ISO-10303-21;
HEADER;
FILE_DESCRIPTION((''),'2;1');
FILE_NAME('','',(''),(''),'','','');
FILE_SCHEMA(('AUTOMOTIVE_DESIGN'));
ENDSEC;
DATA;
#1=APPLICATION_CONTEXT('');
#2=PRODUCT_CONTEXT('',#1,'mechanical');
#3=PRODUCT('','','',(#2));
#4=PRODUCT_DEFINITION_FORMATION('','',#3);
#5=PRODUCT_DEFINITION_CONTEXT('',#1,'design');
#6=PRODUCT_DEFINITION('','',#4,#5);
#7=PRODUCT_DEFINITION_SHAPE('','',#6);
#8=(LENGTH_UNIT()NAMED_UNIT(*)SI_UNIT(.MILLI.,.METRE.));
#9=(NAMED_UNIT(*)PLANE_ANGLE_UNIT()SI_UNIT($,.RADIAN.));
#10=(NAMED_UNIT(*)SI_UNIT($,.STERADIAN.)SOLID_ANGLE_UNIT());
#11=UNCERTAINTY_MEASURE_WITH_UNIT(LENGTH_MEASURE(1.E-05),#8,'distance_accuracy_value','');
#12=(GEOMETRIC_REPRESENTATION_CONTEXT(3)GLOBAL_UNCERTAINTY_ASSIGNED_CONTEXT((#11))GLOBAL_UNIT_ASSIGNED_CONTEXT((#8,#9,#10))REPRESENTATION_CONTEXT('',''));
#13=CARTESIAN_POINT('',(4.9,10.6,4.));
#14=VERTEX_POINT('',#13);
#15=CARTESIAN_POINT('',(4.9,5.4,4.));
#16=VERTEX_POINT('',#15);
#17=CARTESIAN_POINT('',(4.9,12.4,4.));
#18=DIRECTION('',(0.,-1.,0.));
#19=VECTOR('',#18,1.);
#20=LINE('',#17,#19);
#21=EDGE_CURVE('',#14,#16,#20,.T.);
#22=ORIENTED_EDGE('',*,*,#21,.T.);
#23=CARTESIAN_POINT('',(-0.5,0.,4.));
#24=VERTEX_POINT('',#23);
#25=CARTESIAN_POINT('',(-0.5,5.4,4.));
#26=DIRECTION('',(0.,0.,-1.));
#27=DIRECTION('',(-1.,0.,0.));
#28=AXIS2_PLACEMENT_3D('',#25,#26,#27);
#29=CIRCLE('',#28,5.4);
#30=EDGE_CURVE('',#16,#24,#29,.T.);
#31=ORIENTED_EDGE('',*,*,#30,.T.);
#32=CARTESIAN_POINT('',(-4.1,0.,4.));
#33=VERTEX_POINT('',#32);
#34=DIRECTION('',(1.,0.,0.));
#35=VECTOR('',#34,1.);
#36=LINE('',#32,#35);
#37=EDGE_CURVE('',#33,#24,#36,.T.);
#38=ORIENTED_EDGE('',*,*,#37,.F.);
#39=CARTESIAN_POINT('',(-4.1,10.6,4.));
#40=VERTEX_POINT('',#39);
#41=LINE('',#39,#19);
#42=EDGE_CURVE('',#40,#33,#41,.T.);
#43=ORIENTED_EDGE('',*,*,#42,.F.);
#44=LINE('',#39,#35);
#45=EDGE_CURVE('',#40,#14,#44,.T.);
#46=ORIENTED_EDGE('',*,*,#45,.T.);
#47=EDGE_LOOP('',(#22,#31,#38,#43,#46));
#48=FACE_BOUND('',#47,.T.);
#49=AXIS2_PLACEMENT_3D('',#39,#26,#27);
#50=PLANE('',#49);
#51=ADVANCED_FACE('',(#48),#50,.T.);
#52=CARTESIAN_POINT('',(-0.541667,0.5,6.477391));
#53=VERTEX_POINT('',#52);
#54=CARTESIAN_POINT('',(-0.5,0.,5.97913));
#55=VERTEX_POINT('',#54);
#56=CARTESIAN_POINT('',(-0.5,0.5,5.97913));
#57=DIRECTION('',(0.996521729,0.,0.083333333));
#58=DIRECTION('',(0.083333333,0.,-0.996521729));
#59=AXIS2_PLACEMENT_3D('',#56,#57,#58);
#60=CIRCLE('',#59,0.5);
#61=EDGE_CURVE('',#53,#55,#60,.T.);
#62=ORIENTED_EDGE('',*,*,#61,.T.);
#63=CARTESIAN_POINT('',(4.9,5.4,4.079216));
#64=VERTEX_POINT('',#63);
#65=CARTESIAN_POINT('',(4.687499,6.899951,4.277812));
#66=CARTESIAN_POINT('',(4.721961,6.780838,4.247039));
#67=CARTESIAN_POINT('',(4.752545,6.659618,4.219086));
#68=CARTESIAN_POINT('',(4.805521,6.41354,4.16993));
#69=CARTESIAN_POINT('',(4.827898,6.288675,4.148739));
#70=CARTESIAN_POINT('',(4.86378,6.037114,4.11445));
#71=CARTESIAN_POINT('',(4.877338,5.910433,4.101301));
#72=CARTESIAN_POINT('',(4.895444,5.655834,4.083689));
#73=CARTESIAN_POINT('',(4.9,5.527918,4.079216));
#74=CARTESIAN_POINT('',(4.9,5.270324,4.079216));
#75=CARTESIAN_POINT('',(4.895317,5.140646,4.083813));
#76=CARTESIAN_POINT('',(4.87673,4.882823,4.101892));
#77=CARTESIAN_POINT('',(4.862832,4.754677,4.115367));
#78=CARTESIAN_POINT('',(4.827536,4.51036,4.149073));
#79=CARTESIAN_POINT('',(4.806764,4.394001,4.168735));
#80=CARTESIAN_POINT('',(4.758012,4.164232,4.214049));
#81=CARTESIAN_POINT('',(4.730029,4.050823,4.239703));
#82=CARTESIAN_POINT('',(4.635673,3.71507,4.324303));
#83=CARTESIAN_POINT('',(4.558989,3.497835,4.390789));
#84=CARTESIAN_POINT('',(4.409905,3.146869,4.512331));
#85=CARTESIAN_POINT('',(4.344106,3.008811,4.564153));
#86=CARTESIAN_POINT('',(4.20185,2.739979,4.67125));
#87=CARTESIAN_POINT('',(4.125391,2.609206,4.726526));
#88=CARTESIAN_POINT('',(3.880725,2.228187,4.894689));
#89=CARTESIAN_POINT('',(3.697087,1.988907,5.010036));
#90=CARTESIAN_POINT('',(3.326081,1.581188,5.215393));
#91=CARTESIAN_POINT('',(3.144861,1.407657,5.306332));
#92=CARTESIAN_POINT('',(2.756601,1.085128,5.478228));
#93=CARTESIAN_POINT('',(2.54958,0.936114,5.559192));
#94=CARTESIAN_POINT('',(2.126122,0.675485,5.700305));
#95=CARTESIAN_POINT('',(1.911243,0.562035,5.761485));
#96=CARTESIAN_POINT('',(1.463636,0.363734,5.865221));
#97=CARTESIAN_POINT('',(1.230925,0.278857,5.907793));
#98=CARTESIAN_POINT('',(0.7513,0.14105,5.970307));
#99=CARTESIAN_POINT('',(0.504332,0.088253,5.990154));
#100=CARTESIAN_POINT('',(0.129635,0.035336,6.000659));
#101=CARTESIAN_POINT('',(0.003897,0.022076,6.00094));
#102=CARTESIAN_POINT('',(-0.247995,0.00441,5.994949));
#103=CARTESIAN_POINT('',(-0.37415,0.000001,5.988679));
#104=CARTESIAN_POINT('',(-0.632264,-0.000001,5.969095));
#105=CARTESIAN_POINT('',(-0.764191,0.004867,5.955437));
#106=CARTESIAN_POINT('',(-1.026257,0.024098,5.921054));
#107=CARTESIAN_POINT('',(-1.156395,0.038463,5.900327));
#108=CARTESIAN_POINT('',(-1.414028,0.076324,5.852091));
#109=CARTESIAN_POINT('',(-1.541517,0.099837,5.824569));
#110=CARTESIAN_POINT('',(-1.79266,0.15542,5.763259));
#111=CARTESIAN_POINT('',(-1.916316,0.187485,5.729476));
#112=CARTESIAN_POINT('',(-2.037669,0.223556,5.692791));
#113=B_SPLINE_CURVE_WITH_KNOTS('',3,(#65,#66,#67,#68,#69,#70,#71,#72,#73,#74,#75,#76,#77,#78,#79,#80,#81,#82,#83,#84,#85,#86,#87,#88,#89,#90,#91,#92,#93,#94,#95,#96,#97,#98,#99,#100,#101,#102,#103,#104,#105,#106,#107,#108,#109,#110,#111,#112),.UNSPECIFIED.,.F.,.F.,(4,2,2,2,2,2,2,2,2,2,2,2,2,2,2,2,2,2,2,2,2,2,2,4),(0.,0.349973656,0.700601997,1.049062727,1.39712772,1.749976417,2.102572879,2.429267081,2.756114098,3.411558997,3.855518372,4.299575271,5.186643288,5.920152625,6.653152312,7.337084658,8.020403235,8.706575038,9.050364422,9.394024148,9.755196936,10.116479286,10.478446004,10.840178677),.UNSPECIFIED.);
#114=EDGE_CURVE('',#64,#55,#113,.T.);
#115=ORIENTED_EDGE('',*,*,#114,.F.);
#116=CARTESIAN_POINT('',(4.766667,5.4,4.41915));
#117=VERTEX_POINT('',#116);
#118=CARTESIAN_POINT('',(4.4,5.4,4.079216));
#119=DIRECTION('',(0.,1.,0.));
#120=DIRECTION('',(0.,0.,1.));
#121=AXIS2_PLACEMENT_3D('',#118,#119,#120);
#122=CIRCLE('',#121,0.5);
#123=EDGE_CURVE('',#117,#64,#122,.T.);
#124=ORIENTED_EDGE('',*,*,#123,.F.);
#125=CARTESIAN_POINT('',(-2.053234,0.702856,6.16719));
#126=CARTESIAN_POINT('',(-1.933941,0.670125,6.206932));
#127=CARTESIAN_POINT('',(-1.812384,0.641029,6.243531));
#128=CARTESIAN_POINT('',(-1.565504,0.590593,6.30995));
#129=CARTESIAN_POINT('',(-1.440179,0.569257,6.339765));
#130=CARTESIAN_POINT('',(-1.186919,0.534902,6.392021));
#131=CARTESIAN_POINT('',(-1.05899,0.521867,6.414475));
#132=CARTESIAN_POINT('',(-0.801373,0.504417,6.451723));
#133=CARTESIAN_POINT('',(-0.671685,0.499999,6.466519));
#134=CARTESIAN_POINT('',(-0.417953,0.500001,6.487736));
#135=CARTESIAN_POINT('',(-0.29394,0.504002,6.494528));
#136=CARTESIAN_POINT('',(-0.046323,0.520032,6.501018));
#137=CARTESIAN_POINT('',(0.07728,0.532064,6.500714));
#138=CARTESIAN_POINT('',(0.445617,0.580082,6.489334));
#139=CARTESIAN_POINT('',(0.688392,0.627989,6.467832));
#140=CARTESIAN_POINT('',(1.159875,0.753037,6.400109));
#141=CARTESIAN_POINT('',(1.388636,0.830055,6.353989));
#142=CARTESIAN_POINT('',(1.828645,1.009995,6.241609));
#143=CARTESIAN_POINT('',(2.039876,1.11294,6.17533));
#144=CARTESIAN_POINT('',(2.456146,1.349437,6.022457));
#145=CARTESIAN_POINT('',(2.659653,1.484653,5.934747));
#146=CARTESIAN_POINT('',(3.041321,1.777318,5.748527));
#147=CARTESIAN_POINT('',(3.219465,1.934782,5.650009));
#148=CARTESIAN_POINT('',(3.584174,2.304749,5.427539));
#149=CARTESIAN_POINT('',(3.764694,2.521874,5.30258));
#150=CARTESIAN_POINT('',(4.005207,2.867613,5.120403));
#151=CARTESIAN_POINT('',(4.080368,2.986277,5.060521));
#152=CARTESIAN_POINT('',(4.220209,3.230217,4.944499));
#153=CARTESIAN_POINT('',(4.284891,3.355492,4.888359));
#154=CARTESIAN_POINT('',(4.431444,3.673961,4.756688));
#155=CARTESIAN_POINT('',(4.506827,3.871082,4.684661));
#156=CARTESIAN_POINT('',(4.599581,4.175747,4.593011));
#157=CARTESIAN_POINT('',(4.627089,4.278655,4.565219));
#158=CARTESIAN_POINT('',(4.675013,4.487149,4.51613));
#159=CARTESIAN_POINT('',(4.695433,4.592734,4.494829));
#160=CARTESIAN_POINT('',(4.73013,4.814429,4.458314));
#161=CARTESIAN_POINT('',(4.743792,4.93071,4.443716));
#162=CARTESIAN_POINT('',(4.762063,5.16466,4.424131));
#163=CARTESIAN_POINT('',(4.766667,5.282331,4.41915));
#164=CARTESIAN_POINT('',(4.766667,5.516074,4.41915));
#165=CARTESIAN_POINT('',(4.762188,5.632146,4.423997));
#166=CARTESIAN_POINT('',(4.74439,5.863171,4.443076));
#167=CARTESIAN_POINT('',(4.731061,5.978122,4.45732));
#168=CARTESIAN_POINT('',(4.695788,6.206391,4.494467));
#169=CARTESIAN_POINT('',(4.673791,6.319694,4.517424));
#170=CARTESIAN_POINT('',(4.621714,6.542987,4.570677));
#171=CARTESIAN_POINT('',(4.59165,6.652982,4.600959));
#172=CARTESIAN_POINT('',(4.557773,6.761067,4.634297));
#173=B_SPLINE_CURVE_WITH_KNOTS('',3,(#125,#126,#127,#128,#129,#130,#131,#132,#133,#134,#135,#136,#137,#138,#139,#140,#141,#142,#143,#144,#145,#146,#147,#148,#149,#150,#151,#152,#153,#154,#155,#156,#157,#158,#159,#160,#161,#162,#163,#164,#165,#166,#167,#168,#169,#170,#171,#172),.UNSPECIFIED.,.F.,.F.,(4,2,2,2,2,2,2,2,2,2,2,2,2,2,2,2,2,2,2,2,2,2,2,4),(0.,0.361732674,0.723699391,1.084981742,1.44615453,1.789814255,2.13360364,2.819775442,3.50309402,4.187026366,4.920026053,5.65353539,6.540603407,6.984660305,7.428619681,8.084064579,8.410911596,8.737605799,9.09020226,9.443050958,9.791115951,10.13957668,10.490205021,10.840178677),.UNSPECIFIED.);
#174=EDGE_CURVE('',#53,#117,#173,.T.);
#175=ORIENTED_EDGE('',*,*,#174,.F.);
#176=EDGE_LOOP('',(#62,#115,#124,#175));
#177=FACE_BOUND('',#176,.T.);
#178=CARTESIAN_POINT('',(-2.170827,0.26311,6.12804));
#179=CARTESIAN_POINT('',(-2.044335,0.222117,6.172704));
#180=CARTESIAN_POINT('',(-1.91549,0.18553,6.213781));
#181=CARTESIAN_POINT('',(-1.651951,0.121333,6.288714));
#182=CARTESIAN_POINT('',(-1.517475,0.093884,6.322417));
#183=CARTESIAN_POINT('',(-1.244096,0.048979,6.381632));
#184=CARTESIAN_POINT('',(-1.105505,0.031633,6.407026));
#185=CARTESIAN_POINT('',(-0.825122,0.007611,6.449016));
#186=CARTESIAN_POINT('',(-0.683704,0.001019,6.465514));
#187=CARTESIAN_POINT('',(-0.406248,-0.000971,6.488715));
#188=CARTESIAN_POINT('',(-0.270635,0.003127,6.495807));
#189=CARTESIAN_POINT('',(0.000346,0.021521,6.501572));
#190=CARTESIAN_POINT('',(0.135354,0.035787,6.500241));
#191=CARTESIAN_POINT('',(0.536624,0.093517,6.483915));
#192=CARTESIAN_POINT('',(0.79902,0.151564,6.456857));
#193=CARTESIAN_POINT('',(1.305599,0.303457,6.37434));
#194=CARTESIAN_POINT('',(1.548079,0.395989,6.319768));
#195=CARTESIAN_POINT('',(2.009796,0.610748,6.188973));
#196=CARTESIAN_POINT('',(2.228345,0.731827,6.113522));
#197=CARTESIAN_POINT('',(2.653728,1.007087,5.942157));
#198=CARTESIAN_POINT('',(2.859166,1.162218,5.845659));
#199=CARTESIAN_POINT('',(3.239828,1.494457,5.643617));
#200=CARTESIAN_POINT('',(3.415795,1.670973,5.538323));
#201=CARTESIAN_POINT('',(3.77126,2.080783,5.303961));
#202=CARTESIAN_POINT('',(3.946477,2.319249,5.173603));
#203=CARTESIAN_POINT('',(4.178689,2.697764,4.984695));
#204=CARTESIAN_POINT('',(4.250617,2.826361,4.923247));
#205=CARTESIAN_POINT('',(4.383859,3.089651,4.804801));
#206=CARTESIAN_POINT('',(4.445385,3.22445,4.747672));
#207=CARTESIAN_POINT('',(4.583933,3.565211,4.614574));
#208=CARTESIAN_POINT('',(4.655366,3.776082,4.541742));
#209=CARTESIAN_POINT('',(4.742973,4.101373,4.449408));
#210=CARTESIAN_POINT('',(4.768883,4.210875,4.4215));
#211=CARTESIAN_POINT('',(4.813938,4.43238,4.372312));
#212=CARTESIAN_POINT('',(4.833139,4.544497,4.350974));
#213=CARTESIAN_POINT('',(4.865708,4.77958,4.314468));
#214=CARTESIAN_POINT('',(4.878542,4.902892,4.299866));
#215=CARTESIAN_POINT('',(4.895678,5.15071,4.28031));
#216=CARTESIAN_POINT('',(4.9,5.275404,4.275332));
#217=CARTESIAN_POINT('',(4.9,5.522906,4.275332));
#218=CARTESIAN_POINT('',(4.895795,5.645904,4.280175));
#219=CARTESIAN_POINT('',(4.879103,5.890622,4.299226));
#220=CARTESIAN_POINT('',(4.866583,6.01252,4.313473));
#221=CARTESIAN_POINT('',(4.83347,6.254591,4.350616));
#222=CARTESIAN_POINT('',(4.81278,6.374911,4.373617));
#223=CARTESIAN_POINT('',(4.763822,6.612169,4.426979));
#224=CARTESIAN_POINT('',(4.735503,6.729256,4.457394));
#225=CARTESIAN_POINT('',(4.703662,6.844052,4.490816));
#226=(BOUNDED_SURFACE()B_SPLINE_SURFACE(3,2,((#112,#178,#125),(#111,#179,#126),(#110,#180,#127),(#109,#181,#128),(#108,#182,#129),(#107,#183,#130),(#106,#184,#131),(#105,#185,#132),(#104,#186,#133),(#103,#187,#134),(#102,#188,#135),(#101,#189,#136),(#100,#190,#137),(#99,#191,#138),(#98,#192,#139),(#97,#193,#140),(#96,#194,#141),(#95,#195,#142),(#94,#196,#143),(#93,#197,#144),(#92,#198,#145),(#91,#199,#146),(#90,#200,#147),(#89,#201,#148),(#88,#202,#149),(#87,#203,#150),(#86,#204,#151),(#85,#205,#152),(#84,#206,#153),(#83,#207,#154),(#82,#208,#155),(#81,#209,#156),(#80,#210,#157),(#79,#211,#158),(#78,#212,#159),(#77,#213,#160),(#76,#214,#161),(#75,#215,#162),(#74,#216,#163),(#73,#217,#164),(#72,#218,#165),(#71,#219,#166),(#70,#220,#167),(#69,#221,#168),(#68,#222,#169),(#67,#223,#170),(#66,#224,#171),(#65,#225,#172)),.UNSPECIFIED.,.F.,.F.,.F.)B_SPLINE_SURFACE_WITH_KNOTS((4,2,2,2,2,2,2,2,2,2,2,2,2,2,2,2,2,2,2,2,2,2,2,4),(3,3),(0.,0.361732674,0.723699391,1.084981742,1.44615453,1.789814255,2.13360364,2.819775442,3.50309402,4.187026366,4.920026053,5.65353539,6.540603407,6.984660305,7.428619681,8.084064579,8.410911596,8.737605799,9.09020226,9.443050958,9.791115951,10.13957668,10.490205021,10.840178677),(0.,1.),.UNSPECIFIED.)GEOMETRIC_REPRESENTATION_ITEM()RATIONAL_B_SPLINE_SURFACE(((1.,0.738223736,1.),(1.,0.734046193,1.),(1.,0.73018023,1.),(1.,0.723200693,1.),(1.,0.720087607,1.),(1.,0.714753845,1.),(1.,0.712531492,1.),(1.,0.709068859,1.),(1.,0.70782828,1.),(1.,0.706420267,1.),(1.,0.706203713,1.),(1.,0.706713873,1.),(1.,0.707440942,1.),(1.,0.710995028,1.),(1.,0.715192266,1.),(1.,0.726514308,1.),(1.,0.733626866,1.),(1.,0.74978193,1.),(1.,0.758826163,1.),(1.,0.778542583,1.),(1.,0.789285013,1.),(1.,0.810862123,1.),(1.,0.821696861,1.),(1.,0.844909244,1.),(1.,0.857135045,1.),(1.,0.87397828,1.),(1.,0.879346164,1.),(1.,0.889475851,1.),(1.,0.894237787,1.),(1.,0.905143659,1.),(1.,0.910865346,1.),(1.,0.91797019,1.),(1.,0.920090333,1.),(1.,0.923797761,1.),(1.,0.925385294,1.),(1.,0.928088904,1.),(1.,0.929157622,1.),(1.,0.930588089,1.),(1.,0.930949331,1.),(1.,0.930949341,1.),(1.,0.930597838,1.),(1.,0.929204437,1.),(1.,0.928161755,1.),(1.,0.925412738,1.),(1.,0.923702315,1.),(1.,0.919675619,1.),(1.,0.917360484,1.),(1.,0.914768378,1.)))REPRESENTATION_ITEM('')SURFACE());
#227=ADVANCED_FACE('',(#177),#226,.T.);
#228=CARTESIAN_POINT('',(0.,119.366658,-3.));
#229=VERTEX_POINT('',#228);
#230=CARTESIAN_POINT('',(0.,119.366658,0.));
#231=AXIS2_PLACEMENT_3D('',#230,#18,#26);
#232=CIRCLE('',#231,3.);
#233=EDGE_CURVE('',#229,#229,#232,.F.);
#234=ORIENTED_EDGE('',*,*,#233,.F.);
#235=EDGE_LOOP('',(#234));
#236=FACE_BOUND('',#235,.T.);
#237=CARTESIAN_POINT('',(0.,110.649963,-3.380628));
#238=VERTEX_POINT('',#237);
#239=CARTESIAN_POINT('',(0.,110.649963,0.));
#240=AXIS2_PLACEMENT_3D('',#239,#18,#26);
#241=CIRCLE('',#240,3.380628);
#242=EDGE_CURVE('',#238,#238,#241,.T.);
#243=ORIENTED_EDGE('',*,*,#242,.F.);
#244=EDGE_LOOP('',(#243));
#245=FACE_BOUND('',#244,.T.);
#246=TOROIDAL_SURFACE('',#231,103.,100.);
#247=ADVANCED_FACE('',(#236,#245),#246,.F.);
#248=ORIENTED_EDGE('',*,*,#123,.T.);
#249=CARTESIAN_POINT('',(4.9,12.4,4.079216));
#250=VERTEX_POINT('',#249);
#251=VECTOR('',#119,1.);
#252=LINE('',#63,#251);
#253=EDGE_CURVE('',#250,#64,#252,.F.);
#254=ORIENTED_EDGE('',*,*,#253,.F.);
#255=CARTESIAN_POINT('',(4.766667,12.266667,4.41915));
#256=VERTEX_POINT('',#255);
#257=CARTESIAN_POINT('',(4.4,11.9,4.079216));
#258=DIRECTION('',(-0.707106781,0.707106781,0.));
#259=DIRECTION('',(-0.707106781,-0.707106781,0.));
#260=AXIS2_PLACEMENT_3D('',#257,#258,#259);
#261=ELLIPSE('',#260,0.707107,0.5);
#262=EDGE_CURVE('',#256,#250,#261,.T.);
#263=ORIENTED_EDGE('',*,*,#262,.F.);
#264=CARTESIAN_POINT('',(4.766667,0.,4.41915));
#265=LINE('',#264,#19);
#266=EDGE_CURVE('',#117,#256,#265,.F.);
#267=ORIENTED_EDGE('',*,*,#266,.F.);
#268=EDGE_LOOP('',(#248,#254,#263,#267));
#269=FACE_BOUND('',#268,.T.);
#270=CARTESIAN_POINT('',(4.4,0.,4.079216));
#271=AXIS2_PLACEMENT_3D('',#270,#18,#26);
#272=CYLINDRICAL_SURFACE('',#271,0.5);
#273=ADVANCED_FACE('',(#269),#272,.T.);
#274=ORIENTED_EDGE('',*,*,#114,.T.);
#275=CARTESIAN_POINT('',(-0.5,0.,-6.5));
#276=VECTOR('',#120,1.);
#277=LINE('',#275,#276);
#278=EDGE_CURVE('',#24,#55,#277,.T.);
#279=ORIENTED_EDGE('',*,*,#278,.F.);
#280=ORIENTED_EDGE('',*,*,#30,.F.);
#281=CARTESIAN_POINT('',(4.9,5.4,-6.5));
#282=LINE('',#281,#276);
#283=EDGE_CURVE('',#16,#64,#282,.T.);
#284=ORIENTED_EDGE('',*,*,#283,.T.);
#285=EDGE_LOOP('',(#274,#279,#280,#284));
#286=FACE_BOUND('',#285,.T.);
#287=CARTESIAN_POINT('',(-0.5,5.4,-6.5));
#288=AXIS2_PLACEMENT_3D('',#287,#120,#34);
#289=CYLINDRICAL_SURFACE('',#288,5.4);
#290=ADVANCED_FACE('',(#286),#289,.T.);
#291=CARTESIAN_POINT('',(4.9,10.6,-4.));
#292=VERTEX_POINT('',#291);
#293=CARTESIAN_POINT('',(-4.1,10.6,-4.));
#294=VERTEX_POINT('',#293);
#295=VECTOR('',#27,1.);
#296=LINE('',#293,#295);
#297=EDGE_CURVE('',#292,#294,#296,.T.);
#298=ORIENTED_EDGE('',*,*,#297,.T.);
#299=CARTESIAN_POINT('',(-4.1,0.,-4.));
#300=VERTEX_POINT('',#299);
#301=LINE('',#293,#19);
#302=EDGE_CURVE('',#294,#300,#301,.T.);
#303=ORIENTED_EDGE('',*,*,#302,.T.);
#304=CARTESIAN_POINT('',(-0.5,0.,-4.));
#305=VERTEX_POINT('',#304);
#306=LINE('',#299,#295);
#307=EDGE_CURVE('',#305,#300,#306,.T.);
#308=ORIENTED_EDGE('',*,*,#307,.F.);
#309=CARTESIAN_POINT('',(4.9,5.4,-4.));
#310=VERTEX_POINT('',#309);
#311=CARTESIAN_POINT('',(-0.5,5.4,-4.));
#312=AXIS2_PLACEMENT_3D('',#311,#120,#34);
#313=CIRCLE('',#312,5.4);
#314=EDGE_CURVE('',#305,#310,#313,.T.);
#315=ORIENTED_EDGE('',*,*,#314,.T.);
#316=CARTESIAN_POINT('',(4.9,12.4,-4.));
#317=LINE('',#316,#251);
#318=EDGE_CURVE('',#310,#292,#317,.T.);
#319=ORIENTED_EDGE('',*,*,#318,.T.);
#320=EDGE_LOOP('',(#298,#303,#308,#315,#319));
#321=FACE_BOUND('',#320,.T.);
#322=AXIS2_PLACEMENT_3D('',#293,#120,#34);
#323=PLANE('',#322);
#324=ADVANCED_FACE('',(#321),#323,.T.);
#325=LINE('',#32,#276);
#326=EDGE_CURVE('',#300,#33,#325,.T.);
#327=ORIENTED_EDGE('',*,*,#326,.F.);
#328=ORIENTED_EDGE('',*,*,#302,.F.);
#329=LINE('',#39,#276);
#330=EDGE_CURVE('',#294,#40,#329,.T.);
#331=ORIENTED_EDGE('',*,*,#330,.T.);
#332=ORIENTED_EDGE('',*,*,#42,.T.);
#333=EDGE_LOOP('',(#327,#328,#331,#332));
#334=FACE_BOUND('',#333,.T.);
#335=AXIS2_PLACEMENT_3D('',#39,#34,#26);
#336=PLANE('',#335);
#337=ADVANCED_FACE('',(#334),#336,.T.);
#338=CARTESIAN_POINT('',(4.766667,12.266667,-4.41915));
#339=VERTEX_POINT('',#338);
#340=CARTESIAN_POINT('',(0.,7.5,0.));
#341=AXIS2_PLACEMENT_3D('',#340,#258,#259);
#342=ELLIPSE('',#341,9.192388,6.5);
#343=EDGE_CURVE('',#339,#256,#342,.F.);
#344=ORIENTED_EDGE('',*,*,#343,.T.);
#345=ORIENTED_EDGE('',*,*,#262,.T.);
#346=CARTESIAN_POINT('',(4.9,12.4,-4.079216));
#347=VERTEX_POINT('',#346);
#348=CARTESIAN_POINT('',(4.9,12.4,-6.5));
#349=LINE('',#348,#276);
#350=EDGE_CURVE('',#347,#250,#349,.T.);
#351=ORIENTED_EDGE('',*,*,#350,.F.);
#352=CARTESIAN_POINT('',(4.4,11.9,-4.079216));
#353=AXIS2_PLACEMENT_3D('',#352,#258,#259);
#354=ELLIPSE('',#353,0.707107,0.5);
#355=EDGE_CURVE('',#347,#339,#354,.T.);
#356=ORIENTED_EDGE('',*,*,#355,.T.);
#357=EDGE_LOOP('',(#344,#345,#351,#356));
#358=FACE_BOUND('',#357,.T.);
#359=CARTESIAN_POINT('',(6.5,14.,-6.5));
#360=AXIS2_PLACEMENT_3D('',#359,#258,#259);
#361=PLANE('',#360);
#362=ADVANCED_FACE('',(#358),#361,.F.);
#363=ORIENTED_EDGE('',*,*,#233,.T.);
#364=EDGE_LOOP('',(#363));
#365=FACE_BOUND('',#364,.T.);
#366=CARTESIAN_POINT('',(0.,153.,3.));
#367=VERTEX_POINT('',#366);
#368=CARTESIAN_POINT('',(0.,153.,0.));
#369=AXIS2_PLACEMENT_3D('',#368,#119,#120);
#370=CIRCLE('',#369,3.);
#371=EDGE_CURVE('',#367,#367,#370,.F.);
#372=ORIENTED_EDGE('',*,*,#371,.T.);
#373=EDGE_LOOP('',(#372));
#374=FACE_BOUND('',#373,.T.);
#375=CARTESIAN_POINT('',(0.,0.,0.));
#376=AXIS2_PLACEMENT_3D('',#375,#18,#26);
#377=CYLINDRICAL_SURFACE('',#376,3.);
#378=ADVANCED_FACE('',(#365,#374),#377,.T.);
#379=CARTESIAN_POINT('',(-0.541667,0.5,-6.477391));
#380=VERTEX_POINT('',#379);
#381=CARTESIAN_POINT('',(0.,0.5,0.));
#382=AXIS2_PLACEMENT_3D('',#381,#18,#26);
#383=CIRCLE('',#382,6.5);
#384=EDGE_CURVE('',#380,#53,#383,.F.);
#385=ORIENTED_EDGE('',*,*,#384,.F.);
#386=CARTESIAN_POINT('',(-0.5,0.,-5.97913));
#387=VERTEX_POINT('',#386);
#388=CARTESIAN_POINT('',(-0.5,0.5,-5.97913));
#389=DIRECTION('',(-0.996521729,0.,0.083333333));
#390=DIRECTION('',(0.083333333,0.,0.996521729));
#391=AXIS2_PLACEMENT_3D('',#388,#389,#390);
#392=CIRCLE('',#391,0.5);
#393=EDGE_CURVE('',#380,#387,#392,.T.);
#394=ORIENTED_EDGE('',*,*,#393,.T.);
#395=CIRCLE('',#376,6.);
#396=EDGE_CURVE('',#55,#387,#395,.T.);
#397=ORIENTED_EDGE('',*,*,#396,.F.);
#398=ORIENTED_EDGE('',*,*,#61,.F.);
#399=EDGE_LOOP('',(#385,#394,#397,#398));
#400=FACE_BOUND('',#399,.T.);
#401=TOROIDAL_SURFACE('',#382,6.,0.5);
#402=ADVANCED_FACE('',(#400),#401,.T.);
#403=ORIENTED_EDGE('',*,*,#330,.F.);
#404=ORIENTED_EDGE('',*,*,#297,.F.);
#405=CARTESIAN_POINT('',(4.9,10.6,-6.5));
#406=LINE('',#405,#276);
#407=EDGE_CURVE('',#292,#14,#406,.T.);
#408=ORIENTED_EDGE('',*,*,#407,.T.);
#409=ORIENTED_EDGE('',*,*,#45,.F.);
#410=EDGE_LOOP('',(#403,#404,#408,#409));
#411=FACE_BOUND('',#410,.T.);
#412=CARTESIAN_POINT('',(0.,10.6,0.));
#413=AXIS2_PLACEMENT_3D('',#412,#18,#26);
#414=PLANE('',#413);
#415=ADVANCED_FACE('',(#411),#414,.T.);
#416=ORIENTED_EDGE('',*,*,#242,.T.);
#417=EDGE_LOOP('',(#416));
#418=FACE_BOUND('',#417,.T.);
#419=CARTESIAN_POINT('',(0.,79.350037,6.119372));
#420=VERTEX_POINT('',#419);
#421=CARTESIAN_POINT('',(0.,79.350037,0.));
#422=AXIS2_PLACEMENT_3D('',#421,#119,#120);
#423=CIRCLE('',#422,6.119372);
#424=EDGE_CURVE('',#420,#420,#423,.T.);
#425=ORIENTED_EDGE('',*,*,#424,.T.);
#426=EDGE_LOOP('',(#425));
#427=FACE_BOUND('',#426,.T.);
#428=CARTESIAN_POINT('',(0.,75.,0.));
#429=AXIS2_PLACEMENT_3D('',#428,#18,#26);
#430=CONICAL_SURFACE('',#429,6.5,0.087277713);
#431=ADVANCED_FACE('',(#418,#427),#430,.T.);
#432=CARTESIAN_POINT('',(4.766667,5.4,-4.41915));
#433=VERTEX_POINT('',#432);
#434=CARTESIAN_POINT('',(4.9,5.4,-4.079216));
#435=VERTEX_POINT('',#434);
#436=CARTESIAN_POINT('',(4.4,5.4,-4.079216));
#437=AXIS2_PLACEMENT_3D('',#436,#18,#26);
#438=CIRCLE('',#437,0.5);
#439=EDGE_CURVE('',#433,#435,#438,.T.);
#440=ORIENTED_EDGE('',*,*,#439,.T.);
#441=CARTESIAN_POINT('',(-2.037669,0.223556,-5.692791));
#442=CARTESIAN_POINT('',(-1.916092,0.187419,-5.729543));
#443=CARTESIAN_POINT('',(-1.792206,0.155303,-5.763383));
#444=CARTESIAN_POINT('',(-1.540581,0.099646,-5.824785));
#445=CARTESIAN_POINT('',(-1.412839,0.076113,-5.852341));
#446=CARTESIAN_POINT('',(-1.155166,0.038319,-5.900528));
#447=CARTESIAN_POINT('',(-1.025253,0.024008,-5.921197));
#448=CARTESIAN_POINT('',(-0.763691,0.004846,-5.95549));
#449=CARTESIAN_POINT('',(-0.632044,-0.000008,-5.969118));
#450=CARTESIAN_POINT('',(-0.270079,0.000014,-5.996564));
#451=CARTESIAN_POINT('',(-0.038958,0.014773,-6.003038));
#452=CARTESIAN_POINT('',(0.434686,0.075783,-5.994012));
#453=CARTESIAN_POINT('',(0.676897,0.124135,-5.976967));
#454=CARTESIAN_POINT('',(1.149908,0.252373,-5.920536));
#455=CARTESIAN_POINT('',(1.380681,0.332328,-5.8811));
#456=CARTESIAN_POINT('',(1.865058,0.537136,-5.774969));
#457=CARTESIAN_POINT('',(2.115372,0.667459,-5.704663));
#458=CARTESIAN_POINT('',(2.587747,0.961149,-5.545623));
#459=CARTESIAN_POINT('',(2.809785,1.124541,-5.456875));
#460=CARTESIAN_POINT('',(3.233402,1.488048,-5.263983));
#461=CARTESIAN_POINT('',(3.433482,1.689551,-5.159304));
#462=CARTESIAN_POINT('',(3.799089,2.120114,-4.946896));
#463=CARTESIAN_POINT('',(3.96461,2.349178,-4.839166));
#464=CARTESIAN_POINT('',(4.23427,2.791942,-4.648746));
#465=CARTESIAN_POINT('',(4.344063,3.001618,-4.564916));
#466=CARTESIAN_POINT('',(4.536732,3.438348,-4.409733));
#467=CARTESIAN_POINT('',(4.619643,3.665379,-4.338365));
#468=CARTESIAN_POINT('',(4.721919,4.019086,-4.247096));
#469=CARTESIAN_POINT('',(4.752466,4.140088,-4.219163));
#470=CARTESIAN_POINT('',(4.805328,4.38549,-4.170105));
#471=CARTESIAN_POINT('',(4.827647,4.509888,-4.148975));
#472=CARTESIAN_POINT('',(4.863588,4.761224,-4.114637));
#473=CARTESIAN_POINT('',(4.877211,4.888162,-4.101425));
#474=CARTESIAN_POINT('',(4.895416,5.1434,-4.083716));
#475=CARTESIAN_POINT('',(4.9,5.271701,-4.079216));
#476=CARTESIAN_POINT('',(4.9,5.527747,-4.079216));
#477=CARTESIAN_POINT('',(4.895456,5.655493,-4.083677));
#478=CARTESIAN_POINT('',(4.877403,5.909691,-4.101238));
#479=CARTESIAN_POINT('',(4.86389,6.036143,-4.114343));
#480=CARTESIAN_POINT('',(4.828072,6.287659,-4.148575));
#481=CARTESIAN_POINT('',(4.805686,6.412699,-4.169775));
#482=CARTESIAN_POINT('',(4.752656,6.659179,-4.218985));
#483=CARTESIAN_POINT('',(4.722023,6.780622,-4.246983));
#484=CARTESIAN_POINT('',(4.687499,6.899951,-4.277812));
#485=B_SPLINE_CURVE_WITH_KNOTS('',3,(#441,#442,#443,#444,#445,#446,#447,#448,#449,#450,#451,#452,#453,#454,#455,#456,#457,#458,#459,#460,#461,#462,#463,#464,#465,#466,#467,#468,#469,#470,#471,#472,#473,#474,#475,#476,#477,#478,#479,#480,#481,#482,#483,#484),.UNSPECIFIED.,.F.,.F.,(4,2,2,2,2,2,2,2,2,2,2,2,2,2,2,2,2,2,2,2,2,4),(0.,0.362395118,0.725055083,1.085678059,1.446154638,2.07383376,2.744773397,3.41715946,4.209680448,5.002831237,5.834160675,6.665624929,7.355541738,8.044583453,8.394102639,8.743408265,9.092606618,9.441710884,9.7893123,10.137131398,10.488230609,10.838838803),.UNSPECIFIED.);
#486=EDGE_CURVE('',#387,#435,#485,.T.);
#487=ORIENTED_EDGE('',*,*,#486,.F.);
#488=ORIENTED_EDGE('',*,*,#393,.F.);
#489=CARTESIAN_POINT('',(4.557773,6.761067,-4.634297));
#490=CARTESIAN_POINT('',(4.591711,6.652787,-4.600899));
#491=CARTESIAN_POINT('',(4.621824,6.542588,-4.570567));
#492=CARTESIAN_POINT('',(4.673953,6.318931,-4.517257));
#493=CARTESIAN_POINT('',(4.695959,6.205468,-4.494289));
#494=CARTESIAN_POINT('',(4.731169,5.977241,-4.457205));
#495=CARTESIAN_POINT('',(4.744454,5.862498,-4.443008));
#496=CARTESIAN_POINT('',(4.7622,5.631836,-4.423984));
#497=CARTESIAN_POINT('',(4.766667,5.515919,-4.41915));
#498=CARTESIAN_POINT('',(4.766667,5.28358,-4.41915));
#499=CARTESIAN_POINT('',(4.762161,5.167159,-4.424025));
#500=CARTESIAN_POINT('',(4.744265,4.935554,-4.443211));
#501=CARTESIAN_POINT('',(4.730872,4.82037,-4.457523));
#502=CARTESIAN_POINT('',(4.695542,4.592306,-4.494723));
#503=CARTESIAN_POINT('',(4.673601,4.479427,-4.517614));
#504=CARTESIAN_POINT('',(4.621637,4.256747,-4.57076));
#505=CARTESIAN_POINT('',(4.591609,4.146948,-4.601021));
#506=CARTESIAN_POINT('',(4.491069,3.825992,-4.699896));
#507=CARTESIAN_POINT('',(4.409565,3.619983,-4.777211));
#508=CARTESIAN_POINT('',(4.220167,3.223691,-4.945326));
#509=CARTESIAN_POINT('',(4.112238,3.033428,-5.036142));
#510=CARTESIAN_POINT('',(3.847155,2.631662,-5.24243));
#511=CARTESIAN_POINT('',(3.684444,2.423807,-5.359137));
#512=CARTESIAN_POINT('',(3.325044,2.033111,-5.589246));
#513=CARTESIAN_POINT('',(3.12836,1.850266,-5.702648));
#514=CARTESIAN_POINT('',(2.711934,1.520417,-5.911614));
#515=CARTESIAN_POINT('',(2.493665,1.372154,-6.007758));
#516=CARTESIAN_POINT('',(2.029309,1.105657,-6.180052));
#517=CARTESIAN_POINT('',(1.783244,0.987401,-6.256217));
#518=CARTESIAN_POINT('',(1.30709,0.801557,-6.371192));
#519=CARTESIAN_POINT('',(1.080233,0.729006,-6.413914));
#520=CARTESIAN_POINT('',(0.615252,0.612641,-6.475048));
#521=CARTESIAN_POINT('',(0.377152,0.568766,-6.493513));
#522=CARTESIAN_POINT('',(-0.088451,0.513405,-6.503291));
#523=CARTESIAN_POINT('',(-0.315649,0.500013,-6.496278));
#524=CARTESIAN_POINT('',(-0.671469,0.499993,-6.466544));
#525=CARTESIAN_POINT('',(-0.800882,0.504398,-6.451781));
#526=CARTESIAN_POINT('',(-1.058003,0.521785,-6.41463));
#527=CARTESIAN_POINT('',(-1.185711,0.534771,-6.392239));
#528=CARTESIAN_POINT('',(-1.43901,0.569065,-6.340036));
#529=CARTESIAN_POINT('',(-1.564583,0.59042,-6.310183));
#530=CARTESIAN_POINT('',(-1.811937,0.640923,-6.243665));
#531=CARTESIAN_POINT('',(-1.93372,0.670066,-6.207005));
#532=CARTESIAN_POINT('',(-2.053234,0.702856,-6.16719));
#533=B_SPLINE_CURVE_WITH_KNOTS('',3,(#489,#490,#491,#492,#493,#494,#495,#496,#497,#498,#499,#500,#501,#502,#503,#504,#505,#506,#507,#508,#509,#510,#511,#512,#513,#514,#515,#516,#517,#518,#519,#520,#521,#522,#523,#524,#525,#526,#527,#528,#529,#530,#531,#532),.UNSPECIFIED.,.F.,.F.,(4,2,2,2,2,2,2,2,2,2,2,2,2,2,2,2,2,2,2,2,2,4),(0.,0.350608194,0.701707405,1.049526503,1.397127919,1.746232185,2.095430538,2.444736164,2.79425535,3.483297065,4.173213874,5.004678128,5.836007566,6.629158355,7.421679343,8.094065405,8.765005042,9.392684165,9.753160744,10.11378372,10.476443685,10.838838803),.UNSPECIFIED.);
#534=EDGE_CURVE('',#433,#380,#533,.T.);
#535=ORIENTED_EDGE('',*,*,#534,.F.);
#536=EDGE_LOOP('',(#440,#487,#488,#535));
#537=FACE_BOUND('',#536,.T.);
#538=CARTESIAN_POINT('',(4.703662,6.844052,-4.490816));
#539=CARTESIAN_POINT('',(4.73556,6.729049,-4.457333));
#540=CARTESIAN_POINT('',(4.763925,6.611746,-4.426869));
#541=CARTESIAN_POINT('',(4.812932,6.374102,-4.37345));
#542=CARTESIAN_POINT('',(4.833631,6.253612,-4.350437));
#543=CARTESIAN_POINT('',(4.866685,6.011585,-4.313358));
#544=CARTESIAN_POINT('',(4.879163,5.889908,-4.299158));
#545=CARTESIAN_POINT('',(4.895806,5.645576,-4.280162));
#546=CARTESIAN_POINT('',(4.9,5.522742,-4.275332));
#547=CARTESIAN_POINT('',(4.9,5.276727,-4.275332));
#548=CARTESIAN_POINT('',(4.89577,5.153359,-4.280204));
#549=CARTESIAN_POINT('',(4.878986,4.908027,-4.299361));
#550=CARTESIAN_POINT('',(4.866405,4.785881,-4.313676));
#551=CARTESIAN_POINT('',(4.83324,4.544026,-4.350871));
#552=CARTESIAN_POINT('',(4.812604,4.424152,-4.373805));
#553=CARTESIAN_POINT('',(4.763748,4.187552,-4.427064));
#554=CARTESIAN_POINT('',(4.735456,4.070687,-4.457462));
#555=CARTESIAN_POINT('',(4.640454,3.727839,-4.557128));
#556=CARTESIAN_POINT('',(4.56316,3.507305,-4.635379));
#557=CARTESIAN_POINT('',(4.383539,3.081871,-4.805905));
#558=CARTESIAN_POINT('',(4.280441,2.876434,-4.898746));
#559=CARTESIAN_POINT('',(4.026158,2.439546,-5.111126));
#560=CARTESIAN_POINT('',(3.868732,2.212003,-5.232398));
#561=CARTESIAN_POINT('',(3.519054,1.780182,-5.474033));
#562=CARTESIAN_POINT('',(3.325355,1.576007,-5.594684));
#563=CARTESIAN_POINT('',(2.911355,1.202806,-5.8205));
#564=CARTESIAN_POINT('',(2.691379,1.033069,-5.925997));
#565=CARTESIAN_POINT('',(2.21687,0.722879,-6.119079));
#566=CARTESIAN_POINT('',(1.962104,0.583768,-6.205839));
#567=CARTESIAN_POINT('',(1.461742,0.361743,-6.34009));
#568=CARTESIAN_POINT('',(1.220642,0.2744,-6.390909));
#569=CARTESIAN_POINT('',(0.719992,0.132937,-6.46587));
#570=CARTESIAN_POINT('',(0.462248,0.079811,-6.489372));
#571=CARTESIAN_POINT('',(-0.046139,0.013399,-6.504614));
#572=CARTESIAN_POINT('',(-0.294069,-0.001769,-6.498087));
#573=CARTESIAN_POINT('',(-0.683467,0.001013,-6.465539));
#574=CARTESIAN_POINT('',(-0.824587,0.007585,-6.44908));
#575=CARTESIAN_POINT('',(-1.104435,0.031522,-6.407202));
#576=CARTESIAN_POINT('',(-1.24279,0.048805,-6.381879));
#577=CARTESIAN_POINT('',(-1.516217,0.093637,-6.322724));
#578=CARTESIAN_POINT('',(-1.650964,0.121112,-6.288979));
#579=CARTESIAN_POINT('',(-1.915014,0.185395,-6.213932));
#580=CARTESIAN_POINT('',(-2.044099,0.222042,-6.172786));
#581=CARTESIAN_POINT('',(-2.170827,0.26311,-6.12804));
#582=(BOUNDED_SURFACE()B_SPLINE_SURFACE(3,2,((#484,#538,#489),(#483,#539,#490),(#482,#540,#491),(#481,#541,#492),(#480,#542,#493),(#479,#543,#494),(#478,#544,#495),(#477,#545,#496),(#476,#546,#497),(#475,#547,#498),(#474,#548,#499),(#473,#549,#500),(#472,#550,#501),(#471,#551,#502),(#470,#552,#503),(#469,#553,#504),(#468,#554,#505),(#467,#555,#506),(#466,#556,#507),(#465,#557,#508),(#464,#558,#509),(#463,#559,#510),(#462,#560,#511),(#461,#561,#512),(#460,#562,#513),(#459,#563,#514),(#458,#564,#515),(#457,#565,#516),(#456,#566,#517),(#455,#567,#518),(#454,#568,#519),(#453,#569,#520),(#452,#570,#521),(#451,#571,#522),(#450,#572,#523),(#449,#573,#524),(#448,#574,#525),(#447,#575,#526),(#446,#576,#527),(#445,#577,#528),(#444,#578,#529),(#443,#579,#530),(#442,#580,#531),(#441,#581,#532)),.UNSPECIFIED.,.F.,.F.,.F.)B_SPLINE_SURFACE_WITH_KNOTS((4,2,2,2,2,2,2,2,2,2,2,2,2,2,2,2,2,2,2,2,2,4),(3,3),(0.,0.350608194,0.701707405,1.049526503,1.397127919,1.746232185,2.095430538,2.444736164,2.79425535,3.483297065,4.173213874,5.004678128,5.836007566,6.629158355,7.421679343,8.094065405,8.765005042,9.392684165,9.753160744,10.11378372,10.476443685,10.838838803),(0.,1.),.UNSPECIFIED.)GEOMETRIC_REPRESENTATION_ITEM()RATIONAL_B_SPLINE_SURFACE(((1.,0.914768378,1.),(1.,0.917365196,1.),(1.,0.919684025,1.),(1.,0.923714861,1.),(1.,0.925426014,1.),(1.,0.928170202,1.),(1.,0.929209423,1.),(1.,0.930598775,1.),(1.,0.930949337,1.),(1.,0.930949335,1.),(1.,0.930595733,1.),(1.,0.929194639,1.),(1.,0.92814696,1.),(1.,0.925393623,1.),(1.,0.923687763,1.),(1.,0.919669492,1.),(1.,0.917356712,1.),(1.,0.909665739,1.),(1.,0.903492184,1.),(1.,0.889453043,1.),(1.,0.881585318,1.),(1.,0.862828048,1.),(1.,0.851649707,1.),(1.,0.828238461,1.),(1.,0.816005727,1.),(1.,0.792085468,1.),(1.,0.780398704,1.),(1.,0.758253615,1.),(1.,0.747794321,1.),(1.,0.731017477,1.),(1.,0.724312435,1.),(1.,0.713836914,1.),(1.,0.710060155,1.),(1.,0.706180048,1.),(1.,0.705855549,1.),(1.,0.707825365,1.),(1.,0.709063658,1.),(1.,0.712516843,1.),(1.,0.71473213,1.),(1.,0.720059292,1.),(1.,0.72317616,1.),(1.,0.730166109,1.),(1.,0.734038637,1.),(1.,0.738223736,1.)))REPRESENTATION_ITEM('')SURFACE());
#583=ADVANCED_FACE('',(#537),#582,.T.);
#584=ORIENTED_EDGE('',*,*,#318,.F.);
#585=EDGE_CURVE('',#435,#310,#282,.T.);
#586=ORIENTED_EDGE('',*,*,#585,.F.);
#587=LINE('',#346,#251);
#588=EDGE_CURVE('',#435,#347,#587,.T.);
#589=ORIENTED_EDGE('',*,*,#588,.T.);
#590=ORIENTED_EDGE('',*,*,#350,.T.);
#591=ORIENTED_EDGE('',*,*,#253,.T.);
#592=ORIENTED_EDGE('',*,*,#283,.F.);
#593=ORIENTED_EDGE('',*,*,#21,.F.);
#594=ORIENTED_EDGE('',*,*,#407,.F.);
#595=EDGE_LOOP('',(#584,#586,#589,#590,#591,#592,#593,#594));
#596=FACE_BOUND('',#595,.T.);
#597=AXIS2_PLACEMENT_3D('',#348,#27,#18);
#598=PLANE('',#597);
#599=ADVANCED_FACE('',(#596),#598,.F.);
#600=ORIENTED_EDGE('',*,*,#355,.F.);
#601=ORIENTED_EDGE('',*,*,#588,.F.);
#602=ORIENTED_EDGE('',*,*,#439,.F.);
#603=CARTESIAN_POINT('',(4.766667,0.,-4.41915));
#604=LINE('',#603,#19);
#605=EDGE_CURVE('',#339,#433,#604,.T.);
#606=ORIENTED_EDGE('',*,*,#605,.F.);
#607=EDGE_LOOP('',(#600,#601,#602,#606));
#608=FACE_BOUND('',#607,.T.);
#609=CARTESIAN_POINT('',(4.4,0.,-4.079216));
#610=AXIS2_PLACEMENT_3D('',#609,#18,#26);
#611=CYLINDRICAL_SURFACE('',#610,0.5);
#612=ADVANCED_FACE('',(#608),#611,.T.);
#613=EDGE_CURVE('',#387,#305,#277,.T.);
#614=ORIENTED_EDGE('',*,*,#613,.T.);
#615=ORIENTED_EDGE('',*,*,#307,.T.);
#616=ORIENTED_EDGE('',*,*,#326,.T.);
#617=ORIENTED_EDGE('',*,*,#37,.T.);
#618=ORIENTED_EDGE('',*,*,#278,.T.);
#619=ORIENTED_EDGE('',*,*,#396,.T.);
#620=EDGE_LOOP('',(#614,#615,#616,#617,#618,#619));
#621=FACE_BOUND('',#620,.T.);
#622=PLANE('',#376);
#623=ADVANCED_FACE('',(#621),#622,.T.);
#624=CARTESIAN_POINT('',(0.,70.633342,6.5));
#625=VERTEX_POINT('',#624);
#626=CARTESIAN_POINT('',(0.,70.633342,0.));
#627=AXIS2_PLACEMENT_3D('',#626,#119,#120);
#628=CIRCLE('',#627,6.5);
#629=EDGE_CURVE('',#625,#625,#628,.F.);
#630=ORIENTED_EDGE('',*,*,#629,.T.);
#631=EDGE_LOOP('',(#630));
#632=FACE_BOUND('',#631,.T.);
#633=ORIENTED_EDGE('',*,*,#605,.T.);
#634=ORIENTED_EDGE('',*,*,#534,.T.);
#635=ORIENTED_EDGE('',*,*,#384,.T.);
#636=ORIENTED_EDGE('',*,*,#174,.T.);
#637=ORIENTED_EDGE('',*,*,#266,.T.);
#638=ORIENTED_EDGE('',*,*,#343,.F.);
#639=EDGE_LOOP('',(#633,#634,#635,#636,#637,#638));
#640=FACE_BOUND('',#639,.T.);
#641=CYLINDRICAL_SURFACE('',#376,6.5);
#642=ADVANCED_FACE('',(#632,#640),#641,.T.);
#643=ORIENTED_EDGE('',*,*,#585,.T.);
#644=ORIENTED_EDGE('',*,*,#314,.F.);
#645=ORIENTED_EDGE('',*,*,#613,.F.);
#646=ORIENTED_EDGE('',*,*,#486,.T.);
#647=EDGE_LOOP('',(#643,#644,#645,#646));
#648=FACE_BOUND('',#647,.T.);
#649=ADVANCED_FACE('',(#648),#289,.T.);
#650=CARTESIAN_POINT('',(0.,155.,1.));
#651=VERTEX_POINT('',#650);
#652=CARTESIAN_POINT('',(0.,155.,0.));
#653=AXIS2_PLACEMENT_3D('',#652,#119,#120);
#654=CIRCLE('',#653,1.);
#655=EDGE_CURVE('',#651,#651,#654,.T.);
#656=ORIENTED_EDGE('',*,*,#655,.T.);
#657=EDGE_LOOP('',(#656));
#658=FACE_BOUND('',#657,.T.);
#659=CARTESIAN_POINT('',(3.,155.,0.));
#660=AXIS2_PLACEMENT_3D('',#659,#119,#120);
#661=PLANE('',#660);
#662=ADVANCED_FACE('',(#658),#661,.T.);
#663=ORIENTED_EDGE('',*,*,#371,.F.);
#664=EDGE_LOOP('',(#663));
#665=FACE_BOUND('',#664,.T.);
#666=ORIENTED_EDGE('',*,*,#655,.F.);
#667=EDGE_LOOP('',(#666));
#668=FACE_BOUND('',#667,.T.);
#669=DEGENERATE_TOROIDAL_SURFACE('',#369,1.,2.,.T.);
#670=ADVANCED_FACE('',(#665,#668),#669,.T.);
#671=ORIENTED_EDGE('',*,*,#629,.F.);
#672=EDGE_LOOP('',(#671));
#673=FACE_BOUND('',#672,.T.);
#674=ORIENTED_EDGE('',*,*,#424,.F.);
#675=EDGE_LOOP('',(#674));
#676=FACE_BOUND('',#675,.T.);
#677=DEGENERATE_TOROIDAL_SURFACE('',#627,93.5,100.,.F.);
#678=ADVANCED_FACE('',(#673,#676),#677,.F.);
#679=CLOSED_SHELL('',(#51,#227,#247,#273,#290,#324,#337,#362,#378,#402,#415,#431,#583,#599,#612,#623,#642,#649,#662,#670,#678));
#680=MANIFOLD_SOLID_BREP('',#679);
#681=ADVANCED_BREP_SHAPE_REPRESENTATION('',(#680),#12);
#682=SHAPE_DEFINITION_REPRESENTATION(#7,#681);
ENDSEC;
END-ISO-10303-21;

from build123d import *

# Parameters (mm, degrees)
FILLET1_R               = 2
FILLET2_R               = 100
CUT_EXTRUDE1_DEPTH      = 156.272341396
CUT_EXTRUDE1_DEPTH_BACK = 156.272341396
SKETCH3_W               = 11
SKETCH3_H               = 8
CUT_EXTRUDE2_DEPTH      = 10.6
FILLET3_R               = 0.5


with BuildPart() as part:
    # Sketch1 → Revolve1 (revolve)
    with BuildSketch(Plane.XY, mode=Mode.PRIVATE) as revolve1_sk:
        Polygon((6.5, 0), (6.5, 75), (3, 115), (3, 155), (0, 155), (0, 0), align=None)
    revolve(revolve1_sk.sketch.rotate(Axis((0, 0, 0), (0, 1, 0)), 90), axis=Axis((0, 0, 0), (0, 1, 0)))

    # Fillet1
    fillet1_edges = [part.edges().sort_by_distance(p)[0] for p in [
        (0, 155, 3),
    ]]
    fillet(fillet1_edges, radius=FILLET1_R)

    # Fillet2
    # the kernel refuses this fillet: 100 mm, written as the material it adds along each edge
    with BuildSketch(Plane(origin=(0, 115, 0), x_dir=(0, 0, -1), z_dir=(1, 0, 0))) as fillet2_piece_1:
        with BuildLine():
            CenterArc((3 + FILLET2_R, FILLET2_R * 0.0436665788079), FILLET2_R, 180, 5.000644598)
            Line((3 + FILLET2_R * 0.00380628250389, -FILLET2_R * 0.043500371473), (3 - FILLET2_R * 0.016117591846, -FILLET2_R * 0.0452437104786))
            Line((3 - FILLET2_R * 0.016117591846, -FILLET2_R * 0.0452437104786), (3 - FILLET2_R * 0.0199238743499, -FILLET2_R * 0.00174333900562))
            Line((3 - FILLET2_R * 0.0199238743499, -FILLET2_R * 0.00174333900562), (3 - FILLET2_R * 0.02, 0))
            Line((3 - FILLET2_R * 0.02, 0), (3 - FILLET2_R * 0.02, FILLET2_R * 0.0436665788079))
            Line((3 - FILLET2_R * 0.02, FILLET2_R * 0.0436665788079), (3, FILLET2_R * 0.0436665788079))
        make_face()
    revolve(axis=Axis((0, 115, 0), (0, 1, 0)))
    # the kernel refuses this fillet: 100 mm, written as the material it takes off along each edge
    with BuildSketch(Plane(origin=(0, 75, 0), x_dir=(0, 0, -1), z_dir=(1, 0, 0))) as fillet2_2_piece_1:
        with BuildLine():
            CenterArc((6.5 - FILLET2_R, -FILLET2_R * 0.0436665788079), FILLET2_R, 0, 5.000644598)
            Line((6.5, -FILLET2_R * 0.0436665788079), (6.5 + FILLET2_R * 0.02, -FILLET2_R * 0.0436665788079))
            Line((6.5 + FILLET2_R * 0.02, -FILLET2_R * 0.0436665788079), (6.5 + FILLET2_R * 0.02, FILLET2_R * 0.000873331576158))
            Line((6.5 + FILLET2_R * 0.02, FILLET2_R * 0.000873331576158), (6.5 + FILLET2_R * 0.016117591846, FILLET2_R * 0.0452437104786))
            Line((6.5 + FILLET2_R * 0.016117591846, FILLET2_R * 0.0452437104786), (6.5 - FILLET2_R * 0.00380628250389, FILLET2_R * 0.043500371473))
        make_face()
    revolve(axis=Axis((0, 75, 0), (0, 1, 0)), mode=Mode.SUBTRACT)

    # Sketch2 → Cut-Extrude1 (cut, two sides: drawn at the far end of the back side and taken through both)
    with BuildSketch(Plane.XY.offset(-CUT_EXTRUDE1_DEPTH_BACK)):
        with BuildLine():
            Line((6.5, 14), (4.9, 12.4))
            Line((4.9, 12.4), (4.9, 5.4))
            ThreePointArc((4.9, 5.4), (3.318376618, 1.581623382), (-0.5, 0))
            Line((-0.5, 0), (6.5, 0))
            Line((6.5, 0), (6.5, 14))
        make_face()
    extrude(amount=CUT_EXTRUDE1_DEPTH + CUT_EXTRUDE1_DEPTH_BACK, mode=Mode.SUBTRACT)

    # Sketch3 → Cut-Extrude2 (cut)
    with BuildSketch(Plane(origin=(0, 0, 0), x_dir=(1, 0, 0), z_dir=(0, 1, 0))):
        with Locations((1.4, 0)):
            Rectangle(SKETCH3_W, SKETCH3_H)
    extrude(amount=CUT_EXTRUDE2_DEPTH, mode=Mode.SUBTRACT)

    # Fillet3
    fillet3_edges = [part.edges().sort_by_distance(p)[0] for p in [
        (-6.5, 0, 0),
        (3.349776633, 1.613283763, 5.570367722),
        (3.507900773, 1.781059372, -5.47216888),
        (4.9, 8.9, -4.270831301),
        (4.9, 8.9, 4.270831301),
    ]]
    fillet(fillet3_edges, radius=FILLET3_R)


solid = part.part
